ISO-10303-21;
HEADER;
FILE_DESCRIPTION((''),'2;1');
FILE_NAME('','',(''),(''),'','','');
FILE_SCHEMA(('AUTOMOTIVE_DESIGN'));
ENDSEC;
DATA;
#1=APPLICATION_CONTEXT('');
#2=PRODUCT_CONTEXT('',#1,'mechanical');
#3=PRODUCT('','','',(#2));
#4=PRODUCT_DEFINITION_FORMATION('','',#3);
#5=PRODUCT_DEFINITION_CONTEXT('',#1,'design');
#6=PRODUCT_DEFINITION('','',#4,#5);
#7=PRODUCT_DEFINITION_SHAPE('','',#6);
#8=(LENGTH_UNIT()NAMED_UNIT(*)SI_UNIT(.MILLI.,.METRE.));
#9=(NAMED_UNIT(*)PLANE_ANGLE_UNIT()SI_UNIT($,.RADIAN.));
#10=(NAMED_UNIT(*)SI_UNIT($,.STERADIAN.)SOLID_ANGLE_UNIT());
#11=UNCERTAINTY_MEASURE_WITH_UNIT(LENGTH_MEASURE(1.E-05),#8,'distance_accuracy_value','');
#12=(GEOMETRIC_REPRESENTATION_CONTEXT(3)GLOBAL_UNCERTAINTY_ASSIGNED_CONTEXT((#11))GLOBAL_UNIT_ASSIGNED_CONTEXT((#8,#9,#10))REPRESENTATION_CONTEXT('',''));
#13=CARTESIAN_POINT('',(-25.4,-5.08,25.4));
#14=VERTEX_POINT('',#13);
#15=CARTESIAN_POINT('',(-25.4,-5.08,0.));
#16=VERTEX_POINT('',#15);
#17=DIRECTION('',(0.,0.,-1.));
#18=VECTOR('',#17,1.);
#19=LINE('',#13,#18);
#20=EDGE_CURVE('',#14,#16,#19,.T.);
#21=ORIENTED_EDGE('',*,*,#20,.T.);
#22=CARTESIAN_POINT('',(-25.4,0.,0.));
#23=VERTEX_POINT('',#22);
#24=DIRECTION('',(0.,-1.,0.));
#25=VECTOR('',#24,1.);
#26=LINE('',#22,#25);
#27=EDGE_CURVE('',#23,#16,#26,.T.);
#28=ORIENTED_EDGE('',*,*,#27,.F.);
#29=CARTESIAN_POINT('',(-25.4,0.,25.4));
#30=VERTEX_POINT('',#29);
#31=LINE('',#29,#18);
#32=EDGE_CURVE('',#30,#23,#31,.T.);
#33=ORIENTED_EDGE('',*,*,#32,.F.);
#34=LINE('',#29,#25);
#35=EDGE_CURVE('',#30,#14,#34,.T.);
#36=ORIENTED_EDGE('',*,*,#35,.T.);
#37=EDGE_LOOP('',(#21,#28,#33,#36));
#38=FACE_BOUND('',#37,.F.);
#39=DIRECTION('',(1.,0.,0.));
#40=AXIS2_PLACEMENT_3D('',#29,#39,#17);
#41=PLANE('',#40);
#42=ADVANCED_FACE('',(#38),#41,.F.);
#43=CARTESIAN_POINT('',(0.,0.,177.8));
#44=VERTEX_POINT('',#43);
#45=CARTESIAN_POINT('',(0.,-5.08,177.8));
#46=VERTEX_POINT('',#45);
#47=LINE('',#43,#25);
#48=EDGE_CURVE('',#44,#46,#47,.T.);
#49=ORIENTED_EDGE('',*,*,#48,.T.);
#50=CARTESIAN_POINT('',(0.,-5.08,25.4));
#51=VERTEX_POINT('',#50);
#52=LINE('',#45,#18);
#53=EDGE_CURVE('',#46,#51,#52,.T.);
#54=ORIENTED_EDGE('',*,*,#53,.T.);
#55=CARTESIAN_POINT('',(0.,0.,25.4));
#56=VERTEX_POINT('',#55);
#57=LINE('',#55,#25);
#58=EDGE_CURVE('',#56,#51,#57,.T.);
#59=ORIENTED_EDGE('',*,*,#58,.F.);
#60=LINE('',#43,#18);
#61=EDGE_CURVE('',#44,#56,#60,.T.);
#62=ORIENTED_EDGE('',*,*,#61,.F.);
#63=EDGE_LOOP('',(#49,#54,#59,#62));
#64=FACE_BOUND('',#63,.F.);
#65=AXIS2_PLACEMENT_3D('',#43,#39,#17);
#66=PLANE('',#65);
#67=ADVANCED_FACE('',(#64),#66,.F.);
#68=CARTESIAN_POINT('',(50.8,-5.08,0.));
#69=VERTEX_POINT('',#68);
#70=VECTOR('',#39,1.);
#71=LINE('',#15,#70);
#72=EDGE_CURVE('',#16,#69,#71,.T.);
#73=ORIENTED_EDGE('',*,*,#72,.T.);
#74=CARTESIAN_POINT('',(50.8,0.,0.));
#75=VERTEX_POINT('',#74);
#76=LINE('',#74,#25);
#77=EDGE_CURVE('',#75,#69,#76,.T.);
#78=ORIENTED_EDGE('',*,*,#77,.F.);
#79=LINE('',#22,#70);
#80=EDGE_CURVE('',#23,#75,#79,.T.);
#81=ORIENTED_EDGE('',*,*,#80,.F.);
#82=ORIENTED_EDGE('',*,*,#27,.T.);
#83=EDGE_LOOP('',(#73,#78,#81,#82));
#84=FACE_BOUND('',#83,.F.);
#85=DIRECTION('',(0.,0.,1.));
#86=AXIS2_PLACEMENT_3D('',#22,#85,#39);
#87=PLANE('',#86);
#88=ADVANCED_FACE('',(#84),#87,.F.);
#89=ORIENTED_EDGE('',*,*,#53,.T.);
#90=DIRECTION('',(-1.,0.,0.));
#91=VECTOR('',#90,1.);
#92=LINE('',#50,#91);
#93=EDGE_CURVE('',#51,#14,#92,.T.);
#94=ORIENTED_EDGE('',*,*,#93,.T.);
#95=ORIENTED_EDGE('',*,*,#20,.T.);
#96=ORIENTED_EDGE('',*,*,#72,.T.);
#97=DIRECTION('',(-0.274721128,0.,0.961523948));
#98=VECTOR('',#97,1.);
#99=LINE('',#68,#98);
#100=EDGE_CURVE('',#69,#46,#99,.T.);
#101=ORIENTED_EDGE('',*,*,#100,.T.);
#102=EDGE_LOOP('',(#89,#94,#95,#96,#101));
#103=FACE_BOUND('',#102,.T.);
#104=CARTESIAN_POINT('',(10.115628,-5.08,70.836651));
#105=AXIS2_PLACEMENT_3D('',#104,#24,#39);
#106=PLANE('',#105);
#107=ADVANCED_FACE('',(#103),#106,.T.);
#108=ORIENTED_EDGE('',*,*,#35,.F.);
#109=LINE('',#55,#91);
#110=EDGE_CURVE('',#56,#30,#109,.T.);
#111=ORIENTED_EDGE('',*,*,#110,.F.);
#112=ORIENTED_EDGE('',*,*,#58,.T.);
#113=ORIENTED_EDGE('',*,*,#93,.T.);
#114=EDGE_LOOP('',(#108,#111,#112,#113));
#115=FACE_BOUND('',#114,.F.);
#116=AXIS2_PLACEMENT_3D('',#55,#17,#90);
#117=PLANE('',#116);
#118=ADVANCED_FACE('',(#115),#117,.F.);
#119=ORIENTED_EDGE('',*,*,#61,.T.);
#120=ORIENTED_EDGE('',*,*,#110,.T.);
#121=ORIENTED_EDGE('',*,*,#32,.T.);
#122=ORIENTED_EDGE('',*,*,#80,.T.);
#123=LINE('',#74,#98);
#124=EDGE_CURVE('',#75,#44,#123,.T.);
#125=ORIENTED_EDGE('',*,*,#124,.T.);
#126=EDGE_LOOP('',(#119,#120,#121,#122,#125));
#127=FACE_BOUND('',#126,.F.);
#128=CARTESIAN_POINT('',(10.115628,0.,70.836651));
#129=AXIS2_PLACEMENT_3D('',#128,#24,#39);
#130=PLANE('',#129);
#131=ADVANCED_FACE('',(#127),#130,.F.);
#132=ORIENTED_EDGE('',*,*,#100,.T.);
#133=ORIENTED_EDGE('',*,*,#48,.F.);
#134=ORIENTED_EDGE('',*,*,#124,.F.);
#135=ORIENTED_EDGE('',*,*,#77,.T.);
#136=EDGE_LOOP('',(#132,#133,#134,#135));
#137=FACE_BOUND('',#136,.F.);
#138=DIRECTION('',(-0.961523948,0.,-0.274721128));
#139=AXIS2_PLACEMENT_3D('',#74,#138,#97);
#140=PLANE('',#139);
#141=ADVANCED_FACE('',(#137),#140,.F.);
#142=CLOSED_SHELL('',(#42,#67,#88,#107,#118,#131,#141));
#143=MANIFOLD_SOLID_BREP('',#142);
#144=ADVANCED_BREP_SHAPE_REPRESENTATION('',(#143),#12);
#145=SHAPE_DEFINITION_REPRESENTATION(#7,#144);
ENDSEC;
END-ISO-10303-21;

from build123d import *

# Parameters (mm, degrees)
F1_DEPTH = 5.08


# Not quite as in the source:
# - a feature names something its author has since deleted; it is built from what else it names


with BuildPart() as f1:
    # F0 (on Front) → F1 (new body)
    with BuildSketch(Plane.XZ):
        Polygon((0, 177.8), (0, 25.4), (-25.4, 25.4), (-25.4, 0), (50.8, 0), align=None)
    extrude(amount=F1_DEPTH)


solid = f1.part
